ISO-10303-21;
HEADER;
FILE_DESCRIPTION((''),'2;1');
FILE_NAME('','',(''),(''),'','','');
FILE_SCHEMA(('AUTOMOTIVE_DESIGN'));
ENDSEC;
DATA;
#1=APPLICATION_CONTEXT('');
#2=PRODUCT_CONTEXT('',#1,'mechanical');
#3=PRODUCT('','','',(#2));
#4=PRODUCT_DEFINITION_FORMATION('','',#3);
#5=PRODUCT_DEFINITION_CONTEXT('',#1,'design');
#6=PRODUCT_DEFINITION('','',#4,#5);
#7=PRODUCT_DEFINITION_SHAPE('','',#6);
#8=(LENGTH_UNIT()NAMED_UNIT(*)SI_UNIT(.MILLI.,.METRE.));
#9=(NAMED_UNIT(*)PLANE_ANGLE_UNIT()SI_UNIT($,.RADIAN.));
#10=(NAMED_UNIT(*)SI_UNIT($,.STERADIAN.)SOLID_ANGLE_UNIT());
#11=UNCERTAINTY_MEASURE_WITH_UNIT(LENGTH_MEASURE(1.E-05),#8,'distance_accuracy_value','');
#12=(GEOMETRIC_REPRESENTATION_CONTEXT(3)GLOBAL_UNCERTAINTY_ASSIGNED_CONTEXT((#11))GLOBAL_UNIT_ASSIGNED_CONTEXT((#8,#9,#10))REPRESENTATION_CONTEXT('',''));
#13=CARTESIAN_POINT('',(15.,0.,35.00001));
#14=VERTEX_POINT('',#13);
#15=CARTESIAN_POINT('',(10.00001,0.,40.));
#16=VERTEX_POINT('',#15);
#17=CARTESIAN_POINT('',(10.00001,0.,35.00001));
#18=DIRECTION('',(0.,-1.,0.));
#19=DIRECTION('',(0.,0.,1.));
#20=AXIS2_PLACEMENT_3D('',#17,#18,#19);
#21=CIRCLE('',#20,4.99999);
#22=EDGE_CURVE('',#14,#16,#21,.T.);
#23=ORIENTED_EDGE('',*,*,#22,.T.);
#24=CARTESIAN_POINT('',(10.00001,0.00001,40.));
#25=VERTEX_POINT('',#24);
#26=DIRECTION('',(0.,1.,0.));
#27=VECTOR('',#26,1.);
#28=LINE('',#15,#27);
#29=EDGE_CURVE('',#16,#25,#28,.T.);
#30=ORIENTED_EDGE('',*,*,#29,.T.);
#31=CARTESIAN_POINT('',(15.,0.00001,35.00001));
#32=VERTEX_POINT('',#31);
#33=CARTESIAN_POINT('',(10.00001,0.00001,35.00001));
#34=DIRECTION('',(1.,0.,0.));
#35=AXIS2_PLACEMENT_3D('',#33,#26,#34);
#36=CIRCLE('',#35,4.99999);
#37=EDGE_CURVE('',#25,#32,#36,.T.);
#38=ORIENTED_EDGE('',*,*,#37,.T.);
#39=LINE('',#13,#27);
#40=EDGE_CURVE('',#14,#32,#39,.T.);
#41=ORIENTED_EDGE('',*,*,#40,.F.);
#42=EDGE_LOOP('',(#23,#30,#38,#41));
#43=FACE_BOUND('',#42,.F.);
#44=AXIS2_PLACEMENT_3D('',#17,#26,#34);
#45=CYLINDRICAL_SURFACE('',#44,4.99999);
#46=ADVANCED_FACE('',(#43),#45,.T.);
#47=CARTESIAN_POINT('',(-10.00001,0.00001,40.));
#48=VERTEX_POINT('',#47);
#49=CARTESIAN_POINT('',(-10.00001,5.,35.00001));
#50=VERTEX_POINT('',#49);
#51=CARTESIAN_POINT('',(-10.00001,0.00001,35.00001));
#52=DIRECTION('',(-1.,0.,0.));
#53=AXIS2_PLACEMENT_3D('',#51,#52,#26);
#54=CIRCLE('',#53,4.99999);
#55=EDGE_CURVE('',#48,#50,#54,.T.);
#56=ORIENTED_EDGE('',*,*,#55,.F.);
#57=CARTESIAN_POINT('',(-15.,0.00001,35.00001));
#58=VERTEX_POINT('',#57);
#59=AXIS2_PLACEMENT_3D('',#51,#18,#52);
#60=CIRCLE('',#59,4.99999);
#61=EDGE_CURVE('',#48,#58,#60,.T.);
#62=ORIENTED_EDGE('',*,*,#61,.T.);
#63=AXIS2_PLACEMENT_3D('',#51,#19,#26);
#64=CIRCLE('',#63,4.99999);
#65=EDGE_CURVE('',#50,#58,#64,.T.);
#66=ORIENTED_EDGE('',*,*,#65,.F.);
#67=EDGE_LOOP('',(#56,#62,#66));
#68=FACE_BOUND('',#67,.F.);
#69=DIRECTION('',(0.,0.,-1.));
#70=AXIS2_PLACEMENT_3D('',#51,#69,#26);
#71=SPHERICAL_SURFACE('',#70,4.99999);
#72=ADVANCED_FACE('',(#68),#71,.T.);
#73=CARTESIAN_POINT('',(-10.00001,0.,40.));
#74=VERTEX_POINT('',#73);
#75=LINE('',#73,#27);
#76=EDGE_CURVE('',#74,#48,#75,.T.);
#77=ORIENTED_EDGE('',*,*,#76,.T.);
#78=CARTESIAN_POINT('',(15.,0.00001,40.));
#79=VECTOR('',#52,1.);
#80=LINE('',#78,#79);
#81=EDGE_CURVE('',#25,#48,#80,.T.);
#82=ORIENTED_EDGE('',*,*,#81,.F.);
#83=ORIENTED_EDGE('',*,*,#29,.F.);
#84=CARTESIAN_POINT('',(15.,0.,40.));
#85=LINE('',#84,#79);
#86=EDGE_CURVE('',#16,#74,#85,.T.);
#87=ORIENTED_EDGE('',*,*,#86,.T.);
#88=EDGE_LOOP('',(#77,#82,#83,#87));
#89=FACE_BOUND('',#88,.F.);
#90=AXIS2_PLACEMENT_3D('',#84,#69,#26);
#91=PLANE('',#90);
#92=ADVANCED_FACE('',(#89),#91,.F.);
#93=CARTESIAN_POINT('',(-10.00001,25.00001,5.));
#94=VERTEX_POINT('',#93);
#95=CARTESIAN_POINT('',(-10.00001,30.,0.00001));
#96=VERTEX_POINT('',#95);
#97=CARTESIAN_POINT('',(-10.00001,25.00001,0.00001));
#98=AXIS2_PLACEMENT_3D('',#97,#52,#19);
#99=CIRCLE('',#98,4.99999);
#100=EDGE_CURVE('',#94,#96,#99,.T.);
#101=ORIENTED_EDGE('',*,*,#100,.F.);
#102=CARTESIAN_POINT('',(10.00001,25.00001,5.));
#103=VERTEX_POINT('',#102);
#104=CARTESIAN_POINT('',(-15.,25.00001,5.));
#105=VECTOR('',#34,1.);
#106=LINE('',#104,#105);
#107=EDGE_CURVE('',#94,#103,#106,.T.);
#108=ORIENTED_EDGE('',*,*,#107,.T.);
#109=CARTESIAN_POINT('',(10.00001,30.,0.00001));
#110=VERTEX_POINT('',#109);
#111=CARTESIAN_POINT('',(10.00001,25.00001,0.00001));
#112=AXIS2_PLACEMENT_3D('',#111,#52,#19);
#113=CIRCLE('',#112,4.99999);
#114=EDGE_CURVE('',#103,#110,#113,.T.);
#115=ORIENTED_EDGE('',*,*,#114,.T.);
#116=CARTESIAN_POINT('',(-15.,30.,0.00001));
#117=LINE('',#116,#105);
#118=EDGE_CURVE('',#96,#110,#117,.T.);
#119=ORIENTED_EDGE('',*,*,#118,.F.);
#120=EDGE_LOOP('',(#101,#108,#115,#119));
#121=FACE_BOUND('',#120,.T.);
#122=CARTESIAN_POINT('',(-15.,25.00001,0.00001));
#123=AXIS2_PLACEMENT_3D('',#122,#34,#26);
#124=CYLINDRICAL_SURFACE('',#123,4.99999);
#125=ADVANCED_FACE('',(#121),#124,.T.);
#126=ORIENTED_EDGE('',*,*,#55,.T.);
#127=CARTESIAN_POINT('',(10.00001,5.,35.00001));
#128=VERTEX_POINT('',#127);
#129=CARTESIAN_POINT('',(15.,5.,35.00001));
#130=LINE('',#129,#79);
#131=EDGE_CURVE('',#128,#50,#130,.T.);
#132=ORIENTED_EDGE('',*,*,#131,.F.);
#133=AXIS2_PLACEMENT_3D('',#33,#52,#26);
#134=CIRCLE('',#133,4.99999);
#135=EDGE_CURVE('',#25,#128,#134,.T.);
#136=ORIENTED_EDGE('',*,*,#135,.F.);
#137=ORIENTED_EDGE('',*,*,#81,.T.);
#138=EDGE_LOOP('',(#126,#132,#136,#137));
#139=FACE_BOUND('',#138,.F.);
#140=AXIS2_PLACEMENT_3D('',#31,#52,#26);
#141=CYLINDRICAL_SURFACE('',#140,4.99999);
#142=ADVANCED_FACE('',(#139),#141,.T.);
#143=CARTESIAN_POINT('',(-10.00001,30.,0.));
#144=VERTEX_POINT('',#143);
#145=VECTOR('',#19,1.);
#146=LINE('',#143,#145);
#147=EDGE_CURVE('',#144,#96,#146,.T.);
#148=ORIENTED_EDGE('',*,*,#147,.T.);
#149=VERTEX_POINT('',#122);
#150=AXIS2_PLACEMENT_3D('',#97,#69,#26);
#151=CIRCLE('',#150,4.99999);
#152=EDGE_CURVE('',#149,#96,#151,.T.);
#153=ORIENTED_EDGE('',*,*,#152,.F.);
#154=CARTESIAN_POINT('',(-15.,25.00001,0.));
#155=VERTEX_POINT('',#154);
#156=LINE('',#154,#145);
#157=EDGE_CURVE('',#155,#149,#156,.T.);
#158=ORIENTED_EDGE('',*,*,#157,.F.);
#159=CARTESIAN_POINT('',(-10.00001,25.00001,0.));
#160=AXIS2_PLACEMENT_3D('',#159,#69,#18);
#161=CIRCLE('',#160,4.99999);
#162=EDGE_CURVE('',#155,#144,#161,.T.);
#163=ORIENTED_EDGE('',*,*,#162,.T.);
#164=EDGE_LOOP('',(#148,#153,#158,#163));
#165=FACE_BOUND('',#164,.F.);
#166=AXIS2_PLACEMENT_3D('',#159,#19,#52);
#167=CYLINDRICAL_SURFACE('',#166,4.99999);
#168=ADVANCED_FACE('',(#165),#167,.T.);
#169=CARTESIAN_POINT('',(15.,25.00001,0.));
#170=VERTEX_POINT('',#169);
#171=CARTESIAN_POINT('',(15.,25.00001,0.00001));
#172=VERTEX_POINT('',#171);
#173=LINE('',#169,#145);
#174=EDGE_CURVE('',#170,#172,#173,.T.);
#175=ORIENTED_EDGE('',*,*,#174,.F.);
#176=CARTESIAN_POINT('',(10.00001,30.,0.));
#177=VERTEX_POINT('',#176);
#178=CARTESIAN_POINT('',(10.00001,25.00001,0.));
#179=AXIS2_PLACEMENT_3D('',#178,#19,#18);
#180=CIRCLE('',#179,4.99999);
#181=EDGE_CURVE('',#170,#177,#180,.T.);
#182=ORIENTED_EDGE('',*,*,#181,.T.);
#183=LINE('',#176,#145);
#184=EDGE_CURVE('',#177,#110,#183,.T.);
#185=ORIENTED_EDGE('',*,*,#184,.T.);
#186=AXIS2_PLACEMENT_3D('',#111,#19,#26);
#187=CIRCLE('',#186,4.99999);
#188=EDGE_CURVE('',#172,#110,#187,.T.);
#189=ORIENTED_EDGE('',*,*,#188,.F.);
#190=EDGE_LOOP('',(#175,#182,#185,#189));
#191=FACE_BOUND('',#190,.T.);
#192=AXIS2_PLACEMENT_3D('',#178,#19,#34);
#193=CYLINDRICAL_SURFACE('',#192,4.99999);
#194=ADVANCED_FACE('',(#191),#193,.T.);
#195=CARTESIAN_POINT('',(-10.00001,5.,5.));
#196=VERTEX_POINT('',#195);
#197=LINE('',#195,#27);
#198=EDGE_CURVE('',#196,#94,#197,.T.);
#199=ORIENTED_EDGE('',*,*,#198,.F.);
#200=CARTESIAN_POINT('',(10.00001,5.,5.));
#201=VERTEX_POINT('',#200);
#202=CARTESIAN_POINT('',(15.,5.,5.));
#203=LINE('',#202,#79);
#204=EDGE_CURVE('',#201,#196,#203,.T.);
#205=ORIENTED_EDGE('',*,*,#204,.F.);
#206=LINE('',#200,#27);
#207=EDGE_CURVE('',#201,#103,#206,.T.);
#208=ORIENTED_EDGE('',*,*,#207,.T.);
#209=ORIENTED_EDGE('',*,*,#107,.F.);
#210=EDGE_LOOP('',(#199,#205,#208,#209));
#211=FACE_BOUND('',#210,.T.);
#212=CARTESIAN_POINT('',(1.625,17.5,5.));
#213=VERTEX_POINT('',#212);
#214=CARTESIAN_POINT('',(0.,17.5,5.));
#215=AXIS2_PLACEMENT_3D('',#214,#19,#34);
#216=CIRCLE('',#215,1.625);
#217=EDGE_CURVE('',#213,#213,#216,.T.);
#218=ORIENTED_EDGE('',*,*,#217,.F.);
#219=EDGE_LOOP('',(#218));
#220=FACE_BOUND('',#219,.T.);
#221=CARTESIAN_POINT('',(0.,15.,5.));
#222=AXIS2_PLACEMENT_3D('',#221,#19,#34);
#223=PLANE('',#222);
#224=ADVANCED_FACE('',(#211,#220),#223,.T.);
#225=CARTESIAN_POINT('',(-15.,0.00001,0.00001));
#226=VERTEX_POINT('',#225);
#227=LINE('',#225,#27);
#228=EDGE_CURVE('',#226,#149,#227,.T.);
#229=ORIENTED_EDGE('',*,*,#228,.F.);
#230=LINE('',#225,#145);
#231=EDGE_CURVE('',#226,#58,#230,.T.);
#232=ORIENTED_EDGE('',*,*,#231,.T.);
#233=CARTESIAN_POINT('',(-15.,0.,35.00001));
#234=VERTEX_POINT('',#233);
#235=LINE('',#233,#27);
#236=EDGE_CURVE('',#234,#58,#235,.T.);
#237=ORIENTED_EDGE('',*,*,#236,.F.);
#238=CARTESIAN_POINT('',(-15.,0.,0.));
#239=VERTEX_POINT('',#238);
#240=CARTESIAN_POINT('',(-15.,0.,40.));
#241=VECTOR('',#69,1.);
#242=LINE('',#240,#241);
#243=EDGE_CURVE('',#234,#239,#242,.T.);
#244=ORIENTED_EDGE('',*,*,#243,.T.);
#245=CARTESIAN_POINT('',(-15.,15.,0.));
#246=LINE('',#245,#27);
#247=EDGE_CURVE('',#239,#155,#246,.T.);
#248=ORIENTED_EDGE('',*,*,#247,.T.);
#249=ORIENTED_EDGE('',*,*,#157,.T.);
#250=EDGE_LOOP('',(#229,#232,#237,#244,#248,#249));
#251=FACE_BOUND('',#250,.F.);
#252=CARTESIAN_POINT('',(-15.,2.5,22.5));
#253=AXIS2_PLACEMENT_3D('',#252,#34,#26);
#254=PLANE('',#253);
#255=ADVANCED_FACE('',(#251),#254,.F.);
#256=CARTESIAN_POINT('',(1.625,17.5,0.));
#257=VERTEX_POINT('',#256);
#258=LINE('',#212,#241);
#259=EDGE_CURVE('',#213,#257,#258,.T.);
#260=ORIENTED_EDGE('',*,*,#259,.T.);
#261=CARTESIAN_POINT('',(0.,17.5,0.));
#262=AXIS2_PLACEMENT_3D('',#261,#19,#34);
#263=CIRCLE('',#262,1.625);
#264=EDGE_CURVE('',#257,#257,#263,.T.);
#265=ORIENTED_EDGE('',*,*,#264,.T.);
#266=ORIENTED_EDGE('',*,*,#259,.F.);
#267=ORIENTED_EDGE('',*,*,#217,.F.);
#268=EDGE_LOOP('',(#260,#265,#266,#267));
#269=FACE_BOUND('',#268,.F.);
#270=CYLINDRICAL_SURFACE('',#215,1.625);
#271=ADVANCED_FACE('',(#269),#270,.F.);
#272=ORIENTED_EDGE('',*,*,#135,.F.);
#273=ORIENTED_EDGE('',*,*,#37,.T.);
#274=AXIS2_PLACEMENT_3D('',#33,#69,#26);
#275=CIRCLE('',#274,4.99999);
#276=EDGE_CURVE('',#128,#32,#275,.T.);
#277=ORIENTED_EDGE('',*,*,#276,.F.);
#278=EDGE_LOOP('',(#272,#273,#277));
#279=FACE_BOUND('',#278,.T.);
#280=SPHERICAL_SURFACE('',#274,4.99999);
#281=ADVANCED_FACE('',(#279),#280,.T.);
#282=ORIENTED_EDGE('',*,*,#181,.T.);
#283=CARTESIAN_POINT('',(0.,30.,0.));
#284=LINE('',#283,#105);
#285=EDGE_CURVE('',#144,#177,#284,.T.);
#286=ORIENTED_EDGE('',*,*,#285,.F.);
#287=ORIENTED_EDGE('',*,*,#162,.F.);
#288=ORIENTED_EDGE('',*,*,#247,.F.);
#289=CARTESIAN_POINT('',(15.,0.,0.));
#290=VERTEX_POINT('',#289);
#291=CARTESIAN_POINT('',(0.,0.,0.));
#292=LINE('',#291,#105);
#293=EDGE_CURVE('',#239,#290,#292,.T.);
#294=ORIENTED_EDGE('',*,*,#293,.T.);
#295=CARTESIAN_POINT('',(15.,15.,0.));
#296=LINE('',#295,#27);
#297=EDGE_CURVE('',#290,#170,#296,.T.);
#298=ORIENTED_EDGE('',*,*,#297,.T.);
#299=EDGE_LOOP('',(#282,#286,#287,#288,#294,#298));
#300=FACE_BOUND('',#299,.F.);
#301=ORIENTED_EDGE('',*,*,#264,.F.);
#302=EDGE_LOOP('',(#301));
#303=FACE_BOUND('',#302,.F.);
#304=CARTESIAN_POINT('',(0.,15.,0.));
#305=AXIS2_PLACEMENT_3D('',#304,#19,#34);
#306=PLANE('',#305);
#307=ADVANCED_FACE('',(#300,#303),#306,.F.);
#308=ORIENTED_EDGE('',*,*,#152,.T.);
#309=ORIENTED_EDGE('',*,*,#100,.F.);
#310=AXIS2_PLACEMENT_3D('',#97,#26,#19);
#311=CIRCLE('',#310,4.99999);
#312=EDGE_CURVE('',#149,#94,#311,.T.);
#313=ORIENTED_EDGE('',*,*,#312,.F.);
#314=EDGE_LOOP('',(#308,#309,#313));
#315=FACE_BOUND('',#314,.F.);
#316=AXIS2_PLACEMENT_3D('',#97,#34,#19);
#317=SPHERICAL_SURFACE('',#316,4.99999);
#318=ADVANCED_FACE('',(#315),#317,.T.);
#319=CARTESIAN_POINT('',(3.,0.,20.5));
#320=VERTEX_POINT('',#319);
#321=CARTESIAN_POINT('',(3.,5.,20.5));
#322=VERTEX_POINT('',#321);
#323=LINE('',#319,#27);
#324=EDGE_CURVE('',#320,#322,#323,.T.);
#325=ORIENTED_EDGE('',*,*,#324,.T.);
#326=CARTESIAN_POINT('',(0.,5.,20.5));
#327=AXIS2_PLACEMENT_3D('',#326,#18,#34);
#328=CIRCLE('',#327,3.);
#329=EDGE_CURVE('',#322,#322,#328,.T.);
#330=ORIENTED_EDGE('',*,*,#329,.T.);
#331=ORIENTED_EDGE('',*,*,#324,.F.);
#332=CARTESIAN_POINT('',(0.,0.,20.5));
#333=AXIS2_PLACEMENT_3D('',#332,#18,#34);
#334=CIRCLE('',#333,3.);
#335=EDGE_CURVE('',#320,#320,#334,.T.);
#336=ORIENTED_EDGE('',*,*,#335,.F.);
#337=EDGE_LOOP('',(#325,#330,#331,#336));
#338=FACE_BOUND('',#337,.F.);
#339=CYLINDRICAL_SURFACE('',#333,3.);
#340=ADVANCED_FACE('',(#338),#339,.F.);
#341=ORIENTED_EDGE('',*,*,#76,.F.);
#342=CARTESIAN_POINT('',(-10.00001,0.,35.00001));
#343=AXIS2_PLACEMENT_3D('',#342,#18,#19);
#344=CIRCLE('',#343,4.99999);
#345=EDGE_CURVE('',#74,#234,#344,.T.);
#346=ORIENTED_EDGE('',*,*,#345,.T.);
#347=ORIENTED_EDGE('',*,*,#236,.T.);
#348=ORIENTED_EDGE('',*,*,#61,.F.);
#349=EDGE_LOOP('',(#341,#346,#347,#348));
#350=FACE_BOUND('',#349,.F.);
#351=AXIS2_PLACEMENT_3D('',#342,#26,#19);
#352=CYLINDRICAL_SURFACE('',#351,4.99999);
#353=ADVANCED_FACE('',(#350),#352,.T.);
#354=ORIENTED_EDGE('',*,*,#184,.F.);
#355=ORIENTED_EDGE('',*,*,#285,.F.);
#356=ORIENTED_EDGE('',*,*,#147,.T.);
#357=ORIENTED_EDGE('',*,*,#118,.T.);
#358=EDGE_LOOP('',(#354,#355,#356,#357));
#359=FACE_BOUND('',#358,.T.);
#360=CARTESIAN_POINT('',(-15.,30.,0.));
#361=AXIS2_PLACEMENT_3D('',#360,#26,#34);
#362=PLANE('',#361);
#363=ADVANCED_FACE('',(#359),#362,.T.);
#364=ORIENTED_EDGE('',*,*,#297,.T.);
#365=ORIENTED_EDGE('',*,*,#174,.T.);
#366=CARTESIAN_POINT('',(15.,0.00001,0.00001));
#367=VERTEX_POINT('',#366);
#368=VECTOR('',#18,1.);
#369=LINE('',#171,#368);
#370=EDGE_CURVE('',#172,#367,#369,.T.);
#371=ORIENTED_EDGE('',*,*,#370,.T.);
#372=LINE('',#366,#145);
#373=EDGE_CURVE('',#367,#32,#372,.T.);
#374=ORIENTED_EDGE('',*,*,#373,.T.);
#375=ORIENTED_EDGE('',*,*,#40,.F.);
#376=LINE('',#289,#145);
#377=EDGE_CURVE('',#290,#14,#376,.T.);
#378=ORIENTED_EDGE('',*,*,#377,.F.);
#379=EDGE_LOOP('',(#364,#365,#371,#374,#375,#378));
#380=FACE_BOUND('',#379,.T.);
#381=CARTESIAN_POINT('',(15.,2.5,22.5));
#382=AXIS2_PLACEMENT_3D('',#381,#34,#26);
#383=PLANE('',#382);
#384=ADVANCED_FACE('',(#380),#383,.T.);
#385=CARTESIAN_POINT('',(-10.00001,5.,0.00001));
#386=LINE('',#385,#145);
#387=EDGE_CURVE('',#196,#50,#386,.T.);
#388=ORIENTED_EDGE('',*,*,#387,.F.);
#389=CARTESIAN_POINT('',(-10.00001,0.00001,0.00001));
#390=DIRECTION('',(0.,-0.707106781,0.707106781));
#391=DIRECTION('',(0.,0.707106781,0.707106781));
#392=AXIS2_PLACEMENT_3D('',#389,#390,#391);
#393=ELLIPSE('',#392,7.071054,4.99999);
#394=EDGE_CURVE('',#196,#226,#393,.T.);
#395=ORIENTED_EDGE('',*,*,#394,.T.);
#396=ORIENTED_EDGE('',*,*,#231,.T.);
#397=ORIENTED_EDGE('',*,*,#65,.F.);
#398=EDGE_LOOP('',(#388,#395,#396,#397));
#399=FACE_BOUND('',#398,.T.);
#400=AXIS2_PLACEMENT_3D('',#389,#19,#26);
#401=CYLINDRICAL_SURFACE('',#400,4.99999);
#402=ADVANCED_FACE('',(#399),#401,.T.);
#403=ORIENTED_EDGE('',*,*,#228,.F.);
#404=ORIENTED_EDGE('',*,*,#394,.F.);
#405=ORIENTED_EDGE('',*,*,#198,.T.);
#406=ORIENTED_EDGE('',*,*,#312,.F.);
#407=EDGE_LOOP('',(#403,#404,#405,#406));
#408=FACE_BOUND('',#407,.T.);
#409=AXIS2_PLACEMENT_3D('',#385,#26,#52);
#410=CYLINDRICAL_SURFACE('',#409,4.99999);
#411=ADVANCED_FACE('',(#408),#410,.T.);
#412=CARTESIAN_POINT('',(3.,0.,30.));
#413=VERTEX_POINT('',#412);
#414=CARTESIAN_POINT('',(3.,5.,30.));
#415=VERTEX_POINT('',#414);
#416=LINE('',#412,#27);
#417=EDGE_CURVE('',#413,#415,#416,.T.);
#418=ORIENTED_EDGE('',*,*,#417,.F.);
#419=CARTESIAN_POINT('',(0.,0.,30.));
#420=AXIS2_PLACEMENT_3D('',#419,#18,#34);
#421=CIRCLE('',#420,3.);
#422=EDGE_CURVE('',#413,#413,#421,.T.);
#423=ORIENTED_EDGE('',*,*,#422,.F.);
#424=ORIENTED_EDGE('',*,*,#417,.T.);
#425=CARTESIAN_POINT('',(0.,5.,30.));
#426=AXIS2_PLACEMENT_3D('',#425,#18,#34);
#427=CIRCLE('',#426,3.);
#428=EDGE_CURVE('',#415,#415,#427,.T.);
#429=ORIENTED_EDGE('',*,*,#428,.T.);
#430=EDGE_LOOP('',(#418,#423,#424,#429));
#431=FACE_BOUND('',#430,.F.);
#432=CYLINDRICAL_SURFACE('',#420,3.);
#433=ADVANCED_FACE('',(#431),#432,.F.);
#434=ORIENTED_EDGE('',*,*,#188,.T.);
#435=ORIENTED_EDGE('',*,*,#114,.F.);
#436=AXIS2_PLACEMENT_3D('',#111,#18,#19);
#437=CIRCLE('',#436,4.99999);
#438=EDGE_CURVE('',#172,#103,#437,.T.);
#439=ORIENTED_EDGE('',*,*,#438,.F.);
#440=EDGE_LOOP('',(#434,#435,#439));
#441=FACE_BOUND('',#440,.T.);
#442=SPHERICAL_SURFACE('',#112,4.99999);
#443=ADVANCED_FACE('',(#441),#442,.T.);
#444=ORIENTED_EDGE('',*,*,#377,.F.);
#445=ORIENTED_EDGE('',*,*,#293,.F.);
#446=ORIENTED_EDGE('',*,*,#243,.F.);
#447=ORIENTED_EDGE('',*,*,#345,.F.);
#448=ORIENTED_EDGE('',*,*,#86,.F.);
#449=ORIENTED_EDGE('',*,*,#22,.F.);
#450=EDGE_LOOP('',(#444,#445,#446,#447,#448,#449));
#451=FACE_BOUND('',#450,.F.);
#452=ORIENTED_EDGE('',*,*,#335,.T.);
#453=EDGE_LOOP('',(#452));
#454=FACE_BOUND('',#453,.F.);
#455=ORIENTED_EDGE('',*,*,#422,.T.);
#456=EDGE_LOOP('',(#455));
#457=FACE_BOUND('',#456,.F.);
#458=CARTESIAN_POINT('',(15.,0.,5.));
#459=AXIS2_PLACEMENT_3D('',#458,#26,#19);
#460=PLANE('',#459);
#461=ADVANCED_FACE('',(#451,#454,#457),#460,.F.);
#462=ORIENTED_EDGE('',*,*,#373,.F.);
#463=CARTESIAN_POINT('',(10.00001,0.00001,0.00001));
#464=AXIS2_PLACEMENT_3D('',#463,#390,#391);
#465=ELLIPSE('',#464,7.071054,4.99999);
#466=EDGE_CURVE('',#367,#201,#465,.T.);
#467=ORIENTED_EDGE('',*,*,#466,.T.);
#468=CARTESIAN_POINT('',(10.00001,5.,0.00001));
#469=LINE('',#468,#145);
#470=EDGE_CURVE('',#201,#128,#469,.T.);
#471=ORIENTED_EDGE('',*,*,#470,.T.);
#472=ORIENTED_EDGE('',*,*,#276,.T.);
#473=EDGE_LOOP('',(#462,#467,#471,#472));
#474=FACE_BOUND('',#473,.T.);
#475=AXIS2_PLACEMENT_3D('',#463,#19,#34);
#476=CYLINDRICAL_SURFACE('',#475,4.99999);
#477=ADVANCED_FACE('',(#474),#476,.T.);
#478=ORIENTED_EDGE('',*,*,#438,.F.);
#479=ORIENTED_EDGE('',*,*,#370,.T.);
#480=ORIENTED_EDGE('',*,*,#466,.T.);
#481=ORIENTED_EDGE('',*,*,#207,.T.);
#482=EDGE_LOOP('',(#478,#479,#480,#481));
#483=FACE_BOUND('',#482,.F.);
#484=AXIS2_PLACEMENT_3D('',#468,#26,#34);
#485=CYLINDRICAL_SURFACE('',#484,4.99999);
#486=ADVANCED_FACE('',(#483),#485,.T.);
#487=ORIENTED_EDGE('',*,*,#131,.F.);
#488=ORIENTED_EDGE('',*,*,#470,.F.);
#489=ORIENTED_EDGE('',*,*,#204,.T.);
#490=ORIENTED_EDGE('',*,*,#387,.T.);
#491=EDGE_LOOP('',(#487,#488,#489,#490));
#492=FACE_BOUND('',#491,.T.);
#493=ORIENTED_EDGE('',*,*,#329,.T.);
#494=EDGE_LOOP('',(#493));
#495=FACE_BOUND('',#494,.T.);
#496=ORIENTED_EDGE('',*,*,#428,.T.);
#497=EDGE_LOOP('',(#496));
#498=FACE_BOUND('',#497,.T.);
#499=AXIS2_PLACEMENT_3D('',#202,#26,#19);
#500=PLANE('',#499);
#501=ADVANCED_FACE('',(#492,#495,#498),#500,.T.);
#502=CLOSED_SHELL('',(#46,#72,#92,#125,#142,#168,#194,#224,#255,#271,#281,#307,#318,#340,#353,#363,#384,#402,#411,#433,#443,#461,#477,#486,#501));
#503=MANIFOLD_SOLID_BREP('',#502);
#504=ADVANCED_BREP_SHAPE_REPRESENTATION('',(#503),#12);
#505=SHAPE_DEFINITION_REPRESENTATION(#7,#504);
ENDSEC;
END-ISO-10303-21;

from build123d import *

# Parameters (mm, degrees)
F0_W     = 30
F0_H     = 30
F1_DEPTH = 5
F2_W     = 5
F2_H     = 35
F3_DEPTH = 30
F4_R     = 1.625
F5_DEPTH = 25
F6_R     = 4.99999
F7_R     = 3
F8_DEPTH = 25
F9_R     = 4.99999


# Not quite as in the source:
# - a fillet or chamfer is up to 0.001 mm smaller than in the source, because OpenCascade refuses the exact size


with BuildPart() as f1:
    # F0 (on Top) → F1 (new body)
    with BuildSketch(Plane.XY):
        with Locations((0, 15)):
            Rectangle(F0_W, F0_H)
    extrude(amount=F1_DEPTH)

    # F2 (on face) → F3 (join)
    with BuildSketch(Plane.YZ.offset(15)):
        with Locations((2.5, 22.5)):
            Rectangle(F2_W, F2_H)
    extrude(amount=-F3_DEPTH)

    # F4 (on face) → F5 (cut)
    with BuildSketch(Plane.XY.offset(5)):
        with Locations((0, 17.5)):
            Circle(F4_R)
    extrude(amount=-F5_DEPTH, mode=Mode.SUBTRACT)

    # F6 (radius 5 in the source; OpenCascade refuses exactly that, so slightly less here)
    f6_edges = [f1.edges().sort_by_distance(p)[0] for p in [
        (0, 30, 5),
        (15, 17.5, 5),
        (-15, 17.5, 5),
        (15, 30, 2.5),
        (-15, 30, 2.5),
    ]]
    fillet(f6_edges, radius=F6_R)

    # F7 (on face) → F8 (cut)
    with BuildSketch(Plane.XZ):
        with Locations((0, 30)):
            Circle(F7_R)
        with Locations((0, 20.5)):
            Circle(F7_R)
    extrude(amount=-F8_DEPTH, mode=Mode.SUBTRACT)

    # F9 (radius 5 in the source; OpenCascade refuses exactly that, so slightly less here)
    f9_edges = [f1.edges().sort_by_distance(p)[0] for p in [
        (15, 5, 20.000005),
        (-15, 5, 20.000005),
        (0, 5, 40),
        (15, 2.5, 40),
        (-15, 2.5, 40),
    ]]
    fillet(f9_edges, radius=F9_R)


solid = f1.part
